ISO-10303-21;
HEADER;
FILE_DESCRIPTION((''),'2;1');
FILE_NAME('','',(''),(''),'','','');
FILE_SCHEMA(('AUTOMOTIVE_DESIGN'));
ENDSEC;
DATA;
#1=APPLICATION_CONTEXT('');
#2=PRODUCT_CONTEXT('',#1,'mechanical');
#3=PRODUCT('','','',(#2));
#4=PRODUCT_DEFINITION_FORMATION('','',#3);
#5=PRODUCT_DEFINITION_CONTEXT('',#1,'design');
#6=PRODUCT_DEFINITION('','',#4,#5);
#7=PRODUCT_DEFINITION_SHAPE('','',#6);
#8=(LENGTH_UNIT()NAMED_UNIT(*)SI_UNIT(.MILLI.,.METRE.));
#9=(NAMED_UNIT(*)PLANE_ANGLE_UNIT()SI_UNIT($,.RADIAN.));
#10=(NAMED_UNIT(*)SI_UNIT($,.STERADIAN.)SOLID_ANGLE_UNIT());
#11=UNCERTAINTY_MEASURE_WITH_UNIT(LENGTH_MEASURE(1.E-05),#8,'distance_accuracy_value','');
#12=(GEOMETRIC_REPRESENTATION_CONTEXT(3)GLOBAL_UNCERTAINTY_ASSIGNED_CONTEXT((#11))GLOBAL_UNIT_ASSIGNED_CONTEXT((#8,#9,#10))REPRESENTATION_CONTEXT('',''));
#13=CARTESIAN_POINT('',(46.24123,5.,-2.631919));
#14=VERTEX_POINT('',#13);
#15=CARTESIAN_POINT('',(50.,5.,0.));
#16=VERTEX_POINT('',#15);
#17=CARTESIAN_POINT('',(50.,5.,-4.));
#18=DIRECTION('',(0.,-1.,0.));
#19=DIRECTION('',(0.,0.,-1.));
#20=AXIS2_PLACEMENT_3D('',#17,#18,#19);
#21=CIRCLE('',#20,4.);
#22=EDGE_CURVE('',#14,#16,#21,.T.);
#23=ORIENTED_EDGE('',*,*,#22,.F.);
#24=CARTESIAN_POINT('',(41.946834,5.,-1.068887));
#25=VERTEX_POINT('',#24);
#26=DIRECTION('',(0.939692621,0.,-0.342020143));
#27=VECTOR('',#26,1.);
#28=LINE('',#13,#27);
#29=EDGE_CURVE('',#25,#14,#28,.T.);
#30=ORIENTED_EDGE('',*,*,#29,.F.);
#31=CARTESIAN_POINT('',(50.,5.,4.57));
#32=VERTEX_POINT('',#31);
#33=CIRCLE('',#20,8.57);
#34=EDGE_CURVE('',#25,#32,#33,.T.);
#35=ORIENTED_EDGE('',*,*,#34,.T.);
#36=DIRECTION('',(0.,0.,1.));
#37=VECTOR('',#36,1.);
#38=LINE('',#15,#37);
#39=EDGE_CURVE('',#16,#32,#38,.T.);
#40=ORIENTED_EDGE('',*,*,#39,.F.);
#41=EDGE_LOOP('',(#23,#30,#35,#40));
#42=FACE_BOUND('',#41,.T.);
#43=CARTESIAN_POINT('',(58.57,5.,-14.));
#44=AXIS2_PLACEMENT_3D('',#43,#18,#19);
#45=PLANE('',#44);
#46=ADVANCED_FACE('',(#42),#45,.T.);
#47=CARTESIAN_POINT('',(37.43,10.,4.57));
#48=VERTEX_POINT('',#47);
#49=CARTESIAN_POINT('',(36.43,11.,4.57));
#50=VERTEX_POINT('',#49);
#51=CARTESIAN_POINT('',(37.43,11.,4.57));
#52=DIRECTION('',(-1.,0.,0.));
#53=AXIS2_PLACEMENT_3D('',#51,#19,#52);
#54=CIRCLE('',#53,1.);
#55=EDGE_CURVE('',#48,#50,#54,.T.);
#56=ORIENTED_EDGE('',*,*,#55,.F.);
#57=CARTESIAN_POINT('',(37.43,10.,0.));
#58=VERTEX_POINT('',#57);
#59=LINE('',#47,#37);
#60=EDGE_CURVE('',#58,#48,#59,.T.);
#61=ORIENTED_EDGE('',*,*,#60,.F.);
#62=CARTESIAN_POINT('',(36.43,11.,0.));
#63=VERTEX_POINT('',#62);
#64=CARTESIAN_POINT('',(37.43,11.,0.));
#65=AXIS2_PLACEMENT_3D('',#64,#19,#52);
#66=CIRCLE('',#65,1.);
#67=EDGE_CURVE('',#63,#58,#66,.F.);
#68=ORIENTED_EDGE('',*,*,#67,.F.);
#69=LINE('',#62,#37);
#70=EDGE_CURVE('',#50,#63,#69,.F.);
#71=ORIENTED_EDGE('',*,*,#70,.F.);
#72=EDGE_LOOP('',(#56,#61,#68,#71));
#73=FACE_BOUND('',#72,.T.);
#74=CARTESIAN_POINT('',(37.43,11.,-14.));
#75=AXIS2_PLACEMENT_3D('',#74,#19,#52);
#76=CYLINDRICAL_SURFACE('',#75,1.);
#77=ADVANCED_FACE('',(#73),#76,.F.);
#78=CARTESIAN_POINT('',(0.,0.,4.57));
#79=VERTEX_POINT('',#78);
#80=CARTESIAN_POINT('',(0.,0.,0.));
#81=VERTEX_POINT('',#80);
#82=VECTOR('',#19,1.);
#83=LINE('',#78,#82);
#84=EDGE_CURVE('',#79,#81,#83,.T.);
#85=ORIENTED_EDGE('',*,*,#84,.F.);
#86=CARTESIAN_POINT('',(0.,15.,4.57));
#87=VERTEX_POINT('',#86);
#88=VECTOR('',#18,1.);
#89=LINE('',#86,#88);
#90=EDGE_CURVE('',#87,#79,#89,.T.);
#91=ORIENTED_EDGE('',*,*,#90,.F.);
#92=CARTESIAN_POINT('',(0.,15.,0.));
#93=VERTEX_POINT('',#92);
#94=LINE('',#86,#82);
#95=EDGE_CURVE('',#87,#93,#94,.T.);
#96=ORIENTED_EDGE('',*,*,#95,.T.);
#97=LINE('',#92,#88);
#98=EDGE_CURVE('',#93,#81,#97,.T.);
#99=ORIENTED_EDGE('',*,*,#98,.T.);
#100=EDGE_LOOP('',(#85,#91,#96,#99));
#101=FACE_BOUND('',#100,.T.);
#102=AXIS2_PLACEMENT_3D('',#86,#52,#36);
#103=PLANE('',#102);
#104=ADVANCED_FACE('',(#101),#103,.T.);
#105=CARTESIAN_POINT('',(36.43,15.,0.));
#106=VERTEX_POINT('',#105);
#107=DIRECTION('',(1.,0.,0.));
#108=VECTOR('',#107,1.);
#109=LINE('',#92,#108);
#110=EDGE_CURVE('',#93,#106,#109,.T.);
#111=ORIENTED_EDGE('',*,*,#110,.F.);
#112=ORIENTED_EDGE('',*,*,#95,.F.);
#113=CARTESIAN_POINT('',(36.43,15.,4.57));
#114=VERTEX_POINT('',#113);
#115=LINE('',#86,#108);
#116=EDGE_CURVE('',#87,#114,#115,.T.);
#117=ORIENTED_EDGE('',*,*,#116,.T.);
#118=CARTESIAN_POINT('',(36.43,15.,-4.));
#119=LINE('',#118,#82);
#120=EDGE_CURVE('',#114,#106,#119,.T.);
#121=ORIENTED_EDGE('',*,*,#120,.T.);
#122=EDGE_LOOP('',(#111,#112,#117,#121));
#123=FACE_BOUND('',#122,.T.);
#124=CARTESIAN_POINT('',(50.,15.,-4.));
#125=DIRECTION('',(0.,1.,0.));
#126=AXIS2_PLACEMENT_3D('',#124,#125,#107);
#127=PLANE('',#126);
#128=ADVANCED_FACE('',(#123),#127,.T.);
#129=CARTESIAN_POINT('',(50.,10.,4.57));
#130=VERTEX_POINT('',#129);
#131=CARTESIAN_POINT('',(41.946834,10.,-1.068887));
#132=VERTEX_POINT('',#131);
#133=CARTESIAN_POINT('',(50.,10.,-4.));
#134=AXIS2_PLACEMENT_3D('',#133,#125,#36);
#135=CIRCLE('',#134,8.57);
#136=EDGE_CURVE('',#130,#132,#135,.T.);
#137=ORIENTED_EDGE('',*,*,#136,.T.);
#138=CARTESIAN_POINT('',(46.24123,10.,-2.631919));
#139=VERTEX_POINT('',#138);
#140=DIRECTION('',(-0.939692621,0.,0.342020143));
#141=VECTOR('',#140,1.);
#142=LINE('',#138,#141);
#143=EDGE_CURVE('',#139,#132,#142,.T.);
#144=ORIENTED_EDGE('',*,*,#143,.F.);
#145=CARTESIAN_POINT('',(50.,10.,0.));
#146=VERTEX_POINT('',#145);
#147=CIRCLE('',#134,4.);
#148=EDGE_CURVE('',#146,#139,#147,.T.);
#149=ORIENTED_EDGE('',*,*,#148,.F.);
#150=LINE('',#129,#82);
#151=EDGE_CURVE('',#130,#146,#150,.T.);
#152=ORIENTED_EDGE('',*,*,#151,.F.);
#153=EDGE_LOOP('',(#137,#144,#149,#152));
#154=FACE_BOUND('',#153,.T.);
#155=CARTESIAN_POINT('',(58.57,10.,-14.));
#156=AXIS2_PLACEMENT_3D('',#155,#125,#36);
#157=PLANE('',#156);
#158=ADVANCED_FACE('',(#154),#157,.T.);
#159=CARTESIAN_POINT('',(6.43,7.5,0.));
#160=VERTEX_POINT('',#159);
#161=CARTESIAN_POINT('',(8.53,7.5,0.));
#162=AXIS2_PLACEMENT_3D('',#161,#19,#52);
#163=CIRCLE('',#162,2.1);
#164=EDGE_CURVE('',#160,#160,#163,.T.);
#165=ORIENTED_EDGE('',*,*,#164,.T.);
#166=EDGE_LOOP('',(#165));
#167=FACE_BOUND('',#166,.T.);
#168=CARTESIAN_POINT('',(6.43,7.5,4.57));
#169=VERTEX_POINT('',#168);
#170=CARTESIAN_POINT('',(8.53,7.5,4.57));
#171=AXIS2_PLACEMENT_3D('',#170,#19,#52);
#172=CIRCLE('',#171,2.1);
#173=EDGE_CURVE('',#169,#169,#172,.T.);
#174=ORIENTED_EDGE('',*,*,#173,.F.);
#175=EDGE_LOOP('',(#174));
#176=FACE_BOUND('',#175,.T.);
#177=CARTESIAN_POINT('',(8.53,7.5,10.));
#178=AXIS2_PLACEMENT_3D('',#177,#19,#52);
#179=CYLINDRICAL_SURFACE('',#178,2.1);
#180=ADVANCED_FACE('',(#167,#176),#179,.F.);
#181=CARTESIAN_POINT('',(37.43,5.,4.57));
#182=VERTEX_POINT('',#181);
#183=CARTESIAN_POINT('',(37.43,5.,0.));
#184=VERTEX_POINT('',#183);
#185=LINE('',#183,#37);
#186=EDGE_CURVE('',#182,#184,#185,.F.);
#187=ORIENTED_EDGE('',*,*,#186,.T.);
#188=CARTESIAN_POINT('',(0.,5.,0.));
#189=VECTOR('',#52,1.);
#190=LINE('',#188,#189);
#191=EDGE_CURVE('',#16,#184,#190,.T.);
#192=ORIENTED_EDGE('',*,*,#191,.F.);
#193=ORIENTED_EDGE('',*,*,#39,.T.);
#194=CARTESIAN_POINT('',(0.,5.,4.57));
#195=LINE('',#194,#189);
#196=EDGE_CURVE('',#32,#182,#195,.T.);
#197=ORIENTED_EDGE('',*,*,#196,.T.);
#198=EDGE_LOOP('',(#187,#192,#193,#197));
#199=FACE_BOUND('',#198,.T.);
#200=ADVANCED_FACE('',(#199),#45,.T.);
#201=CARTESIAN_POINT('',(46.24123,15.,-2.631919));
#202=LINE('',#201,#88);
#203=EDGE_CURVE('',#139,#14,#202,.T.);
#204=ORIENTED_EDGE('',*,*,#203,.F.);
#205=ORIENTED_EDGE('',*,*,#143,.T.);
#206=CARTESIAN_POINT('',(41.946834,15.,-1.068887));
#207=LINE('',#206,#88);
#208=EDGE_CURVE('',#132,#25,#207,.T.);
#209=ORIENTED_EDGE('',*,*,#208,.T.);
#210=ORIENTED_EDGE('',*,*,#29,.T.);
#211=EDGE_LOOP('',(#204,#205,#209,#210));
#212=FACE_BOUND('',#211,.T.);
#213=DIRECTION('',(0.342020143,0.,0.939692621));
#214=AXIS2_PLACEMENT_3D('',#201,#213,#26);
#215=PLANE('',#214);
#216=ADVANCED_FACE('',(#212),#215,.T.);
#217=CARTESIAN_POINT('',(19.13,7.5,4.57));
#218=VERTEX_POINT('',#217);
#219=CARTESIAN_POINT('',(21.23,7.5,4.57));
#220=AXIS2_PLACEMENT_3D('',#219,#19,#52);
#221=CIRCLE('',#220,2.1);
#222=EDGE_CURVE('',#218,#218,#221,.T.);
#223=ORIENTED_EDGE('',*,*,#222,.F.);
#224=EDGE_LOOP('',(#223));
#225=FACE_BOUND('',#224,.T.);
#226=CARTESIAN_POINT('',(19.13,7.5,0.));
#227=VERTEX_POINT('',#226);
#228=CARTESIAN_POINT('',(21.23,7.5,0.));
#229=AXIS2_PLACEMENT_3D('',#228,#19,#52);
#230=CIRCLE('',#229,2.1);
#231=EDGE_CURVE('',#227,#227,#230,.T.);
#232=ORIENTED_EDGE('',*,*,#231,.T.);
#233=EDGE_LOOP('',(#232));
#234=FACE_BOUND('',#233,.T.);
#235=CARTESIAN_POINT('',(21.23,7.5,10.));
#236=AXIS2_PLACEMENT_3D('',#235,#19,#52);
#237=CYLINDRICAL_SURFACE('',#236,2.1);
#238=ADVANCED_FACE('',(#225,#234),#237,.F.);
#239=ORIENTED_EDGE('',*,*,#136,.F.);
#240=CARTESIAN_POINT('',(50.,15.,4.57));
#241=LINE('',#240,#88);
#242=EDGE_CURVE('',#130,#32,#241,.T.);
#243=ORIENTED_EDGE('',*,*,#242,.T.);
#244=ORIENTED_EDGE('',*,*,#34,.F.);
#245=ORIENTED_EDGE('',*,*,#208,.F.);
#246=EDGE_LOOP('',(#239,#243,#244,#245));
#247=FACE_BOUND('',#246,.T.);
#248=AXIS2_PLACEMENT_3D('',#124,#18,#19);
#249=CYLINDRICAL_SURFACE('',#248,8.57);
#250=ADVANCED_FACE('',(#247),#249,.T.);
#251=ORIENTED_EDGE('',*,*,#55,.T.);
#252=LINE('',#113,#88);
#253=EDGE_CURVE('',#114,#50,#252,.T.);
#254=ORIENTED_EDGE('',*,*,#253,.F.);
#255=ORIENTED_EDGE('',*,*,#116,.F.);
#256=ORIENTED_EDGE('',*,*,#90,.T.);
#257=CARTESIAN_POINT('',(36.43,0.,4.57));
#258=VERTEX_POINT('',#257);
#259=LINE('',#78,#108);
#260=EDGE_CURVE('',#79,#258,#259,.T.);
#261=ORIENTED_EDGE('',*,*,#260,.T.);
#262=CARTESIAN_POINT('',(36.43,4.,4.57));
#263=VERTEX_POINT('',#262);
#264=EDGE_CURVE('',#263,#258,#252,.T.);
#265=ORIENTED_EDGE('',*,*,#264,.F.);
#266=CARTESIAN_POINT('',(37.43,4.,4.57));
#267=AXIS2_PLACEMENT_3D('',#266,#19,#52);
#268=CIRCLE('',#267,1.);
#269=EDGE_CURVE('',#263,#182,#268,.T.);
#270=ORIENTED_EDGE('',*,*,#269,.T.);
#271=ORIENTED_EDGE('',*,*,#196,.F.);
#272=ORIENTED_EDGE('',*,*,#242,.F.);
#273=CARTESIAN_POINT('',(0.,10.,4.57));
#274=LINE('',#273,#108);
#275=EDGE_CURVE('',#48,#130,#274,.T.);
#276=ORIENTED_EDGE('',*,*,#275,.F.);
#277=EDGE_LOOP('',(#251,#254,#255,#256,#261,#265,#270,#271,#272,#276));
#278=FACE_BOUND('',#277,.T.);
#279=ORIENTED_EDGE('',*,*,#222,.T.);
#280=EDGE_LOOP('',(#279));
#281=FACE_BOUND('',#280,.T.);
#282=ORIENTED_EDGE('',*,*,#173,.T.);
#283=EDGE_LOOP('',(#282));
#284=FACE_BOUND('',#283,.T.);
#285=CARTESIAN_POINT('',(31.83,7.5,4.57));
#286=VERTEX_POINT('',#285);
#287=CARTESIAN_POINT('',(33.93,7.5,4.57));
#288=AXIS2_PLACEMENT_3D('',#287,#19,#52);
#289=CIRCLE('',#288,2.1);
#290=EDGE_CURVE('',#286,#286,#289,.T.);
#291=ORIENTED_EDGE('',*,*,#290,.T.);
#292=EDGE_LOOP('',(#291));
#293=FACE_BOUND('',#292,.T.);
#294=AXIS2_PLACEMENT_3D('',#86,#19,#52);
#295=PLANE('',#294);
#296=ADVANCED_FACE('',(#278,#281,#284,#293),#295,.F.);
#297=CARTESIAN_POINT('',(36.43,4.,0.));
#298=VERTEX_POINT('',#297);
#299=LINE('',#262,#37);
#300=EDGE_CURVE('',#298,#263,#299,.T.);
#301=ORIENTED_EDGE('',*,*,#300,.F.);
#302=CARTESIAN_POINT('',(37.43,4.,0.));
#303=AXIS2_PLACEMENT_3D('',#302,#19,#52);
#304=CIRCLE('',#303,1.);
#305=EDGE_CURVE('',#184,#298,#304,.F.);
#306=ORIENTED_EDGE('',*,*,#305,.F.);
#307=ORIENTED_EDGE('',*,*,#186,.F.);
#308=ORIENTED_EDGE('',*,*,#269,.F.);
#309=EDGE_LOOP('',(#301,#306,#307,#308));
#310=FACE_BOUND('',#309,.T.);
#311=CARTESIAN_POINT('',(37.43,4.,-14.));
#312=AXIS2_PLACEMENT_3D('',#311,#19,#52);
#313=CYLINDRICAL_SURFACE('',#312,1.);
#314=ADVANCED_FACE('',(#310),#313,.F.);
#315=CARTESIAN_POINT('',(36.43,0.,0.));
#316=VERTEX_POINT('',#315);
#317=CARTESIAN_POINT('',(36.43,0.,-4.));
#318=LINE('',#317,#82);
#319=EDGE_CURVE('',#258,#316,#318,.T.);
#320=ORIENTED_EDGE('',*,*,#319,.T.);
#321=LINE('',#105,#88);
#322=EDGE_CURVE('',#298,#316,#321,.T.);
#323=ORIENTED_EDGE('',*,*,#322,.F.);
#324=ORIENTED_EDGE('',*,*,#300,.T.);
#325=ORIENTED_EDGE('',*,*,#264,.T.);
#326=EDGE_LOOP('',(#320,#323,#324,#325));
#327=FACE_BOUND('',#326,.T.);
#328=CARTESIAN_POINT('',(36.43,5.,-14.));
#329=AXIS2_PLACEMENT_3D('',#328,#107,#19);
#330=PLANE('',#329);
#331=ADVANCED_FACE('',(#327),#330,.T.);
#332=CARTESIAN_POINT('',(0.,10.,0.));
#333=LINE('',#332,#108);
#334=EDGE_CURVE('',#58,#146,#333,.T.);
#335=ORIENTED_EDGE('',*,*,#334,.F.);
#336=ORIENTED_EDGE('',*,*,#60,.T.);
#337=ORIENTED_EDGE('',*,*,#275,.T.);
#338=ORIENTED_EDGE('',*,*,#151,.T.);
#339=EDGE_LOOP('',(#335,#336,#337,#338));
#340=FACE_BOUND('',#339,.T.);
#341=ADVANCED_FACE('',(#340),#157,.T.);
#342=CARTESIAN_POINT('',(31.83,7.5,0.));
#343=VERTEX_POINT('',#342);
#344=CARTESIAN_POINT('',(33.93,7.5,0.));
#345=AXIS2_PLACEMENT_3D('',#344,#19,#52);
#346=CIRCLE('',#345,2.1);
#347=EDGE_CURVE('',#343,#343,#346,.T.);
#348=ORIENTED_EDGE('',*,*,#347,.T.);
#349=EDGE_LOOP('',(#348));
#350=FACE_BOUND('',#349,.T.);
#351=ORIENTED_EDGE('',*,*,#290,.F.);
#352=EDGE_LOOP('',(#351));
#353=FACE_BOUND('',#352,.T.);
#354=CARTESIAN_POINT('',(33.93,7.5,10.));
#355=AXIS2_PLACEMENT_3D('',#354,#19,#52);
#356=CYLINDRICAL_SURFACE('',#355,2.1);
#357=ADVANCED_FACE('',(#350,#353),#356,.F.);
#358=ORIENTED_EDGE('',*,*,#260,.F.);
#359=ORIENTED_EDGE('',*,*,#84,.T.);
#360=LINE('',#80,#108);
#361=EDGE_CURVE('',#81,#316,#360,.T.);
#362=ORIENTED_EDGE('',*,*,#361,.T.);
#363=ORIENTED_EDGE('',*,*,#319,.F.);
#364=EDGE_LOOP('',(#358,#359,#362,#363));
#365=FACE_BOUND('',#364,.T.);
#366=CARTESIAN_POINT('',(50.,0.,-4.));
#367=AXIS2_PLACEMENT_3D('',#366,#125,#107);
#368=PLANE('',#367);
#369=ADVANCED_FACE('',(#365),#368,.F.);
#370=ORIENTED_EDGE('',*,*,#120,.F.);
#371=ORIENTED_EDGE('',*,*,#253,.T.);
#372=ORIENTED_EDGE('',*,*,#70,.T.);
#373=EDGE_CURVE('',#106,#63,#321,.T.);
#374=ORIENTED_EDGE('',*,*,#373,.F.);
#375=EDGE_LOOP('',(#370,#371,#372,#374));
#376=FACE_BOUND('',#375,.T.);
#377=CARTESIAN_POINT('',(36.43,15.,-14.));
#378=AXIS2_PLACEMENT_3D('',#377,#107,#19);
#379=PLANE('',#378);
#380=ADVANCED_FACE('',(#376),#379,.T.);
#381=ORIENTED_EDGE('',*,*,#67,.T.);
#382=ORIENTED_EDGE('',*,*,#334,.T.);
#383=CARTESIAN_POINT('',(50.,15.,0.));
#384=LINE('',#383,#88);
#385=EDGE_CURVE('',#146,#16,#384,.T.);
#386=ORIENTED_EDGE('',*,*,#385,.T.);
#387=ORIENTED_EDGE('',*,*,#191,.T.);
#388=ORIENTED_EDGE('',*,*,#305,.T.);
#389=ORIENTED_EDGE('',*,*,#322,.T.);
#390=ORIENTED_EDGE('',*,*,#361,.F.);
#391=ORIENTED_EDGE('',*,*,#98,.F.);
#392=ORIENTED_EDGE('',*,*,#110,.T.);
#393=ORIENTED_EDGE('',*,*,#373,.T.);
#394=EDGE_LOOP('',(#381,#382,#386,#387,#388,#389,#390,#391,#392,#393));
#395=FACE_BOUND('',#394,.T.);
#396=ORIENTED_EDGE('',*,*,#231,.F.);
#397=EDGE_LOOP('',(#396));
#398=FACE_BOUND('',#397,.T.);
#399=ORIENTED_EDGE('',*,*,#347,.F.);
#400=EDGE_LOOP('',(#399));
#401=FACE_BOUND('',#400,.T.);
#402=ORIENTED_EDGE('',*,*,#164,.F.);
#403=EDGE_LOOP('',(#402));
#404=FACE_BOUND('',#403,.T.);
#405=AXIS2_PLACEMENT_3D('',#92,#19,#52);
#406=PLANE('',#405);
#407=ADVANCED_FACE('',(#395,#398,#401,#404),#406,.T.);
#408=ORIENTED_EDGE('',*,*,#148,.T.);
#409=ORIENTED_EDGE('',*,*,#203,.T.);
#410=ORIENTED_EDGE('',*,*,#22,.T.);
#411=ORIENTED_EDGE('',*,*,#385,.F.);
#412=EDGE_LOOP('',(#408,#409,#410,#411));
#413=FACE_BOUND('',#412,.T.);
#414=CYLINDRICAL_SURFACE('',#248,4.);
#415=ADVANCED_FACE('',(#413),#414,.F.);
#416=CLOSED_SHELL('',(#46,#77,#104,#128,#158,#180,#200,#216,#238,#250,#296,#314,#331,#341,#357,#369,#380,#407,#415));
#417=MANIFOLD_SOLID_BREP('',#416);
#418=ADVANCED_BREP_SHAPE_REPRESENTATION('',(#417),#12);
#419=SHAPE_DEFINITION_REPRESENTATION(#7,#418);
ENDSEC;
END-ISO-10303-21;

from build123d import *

# Parameters (mm, degrees)
BASE_FLANGE1_DEPTH      = 15
CUT_EXTRUDE1_DEPTH      = 14
CUT_EXTRUDE1_DEPTH_BACK = 10
SKETCH6_W               = 22.14
SKETCH6_H               = 5
SKETCH7_R               = 2.1
CUT_EXTRUDE2_DEPTH      = 10
FILLET2_R               = 1


# Sheet-metal steps are written as plain solids
with BuildPart() as part:
    # Sketch1 → Base-Flange1 (new body)
    with BuildSketch(Plane(origin=(0, 0, 0), x_dir=(1, 0, 0), z_dir=(0, 1, 0))):
        with BuildLine():
            Line((0, 0), (50, 0))
            ThreePointArc((50, 0), (52.294305745, 7.276608177), (46.241229517, 2.631919427))
            Line((46.241229517, 2.631919427), (41.94683424, 1.068887372))
            ThreePointArc((41.94683424, 1.068887372), (54.91555006, 11.02013302), (50, -4.57))
            Line((50, -4.57), (0, -4.57))
            Line((0, -4.57), (0, 0))
        make_face()
    extrude(amount=BASE_FLANGE1_DEPTH)

    # Sketch6 → Cut-Extrude1 (cut, two sides: drawn at the far end of the back side and taken through both)
    with BuildSketch(Plane(origin=(0, 0, 0), x_dir=(-1, 0, 0), z_dir=(0, 0, -1)).offset(-CUT_EXTRUDE1_DEPTH_BACK)):
        with Locations((-47.5, 12.5)):
            Rectangle(SKETCH6_W, SKETCH6_H)
        with Locations((-47.5, 2.5)):
            Rectangle(SKETCH6_W, SKETCH6_H)
    extrude(amount=CUT_EXTRUDE1_DEPTH + CUT_EXTRUDE1_DEPTH_BACK, mode=Mode.SUBTRACT)

    # Sketch7 → Cut-Extrude2 (cut)
    with BuildSketch(Plane(origin=(0, 0, 0), x_dir=(-1, 0, 0), z_dir=(0, 0, -1))):
        with Locations((-21.23, 7.5)):
            Circle(SKETCH7_R)
        with Locations((-33.93, 7.5)):
            Circle(SKETCH7_R)
        with Locations((-8.53, 7.5)):
            Circle(SKETCH7_R)
    extrude(amount=-CUT_EXTRUDE2_DEPTH, mode=Mode.SUBTRACT)

    # Fillet2
    fillet2_edges = [part.edges().sort_by_distance(p)[0] for p in [
        (36.43, 10, 2.285),
        (36.43, 5, 2.285),
    ]]
    fillet(fillet2_edges, radius=FILLET2_R)


solid = part.part
